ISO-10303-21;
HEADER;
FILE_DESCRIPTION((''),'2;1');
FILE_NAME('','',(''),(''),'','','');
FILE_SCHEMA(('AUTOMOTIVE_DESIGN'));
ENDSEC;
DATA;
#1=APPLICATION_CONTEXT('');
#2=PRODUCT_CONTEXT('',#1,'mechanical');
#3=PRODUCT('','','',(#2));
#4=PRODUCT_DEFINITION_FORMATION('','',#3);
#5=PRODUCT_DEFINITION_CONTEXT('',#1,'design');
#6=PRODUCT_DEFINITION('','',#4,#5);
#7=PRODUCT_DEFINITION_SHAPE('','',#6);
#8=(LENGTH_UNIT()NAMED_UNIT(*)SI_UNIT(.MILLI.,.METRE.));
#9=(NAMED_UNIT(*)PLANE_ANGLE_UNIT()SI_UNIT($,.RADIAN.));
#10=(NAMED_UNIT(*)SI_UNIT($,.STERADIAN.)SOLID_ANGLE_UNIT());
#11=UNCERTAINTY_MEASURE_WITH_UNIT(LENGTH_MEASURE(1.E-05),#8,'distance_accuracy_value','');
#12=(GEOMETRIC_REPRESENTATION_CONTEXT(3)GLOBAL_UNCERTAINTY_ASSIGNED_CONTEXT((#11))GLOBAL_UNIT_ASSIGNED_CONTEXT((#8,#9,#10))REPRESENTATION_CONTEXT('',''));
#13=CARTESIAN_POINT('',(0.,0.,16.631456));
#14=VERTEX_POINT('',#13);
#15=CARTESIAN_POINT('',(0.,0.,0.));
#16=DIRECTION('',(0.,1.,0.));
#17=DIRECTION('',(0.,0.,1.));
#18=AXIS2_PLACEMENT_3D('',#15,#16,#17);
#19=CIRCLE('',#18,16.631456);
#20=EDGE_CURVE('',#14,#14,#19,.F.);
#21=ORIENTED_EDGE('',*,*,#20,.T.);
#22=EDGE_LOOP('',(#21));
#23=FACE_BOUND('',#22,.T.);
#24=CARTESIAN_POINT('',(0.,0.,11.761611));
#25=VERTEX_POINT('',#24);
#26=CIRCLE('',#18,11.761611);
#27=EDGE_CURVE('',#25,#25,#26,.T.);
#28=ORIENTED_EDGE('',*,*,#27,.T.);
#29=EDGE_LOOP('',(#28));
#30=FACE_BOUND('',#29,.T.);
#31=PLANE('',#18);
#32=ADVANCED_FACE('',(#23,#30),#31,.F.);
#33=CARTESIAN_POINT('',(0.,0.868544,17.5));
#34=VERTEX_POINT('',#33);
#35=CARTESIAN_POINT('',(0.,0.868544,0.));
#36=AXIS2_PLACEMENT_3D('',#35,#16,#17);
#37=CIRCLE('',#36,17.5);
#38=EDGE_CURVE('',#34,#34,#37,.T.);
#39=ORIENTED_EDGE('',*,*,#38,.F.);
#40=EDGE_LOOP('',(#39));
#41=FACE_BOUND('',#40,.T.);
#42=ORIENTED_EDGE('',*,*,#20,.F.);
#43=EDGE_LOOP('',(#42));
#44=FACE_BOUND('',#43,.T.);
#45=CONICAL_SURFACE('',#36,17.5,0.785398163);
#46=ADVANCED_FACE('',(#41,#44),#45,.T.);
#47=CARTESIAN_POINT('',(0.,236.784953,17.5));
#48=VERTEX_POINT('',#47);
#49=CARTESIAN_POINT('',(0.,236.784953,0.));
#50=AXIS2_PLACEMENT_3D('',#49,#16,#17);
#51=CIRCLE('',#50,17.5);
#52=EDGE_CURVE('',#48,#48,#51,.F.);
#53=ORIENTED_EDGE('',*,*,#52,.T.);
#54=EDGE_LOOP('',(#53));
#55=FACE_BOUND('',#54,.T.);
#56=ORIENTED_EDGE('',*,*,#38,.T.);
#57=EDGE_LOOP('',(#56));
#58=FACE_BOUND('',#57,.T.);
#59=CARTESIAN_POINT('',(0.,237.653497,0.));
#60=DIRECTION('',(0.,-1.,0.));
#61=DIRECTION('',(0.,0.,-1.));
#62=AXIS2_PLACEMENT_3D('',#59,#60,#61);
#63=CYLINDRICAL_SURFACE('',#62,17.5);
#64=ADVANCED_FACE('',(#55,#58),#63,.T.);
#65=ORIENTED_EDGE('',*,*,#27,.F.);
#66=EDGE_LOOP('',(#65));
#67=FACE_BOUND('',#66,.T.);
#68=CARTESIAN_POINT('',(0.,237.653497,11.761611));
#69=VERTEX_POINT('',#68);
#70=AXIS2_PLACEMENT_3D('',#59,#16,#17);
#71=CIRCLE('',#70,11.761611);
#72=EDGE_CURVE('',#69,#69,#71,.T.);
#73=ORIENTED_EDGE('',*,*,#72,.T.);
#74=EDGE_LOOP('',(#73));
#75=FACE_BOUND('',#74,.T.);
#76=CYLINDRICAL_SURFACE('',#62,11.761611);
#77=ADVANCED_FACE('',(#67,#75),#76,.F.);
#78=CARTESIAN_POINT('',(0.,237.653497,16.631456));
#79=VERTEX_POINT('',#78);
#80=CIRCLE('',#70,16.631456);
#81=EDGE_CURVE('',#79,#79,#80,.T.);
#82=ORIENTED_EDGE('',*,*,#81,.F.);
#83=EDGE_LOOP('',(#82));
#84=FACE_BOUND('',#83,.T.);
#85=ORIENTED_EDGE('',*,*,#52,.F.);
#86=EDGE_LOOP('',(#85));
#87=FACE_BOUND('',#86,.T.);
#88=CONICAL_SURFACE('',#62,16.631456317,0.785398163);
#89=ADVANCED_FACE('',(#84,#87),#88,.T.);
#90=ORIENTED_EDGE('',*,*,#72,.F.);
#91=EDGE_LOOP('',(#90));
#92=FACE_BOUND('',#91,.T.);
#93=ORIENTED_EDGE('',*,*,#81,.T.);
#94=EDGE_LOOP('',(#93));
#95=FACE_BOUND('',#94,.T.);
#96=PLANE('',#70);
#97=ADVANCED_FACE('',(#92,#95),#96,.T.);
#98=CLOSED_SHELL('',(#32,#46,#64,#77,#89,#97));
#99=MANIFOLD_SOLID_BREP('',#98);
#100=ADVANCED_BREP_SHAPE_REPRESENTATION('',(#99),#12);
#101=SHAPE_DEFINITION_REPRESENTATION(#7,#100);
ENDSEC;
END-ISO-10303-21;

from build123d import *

# Parameters (mm, degrees)
SKETCH1_R           = 17.5
BOSS_EXTRUDE1_DEPTH = 237.653496643
SKETCH2_R           = 11.761611226
CUT_EXTRUDE1_DEPTH  = 239.938662562
CHAMFER1_SIZE       = 0.868543683


with BuildPart() as part:
    # Sketch1 → Boss-Extrude1 (new body)
    with BuildSketch(Plane(origin=(0, 0, 0), x_dir=(1, 0, 0), z_dir=(0, 1, 0))):
        Circle(SKETCH1_R)
    extrude(amount=BOSS_EXTRUDE1_DEPTH)

    # Sketch2 → Cut-Extrude1 (cut, through all)
    with BuildSketch(Plane(origin=(0, 0, 0), x_dir=(1, 0, 0), z_dir=(0, 1, 0))):
        Circle(SKETCH2_R)
    extrude(amount=CUT_EXTRUDE1_DEPTH, mode=Mode.SUBTRACT)

    # Chamfer1
    chamfer1_edges = [part.edges().sort_by_distance(p)[0] for p in [
        (-17.5, 237.653496643, 0),
        (-17.5, 0, 0),
    ]]
    chamfer(chamfer1_edges, length=CHAMFER1_SIZE)


solid = part.part
